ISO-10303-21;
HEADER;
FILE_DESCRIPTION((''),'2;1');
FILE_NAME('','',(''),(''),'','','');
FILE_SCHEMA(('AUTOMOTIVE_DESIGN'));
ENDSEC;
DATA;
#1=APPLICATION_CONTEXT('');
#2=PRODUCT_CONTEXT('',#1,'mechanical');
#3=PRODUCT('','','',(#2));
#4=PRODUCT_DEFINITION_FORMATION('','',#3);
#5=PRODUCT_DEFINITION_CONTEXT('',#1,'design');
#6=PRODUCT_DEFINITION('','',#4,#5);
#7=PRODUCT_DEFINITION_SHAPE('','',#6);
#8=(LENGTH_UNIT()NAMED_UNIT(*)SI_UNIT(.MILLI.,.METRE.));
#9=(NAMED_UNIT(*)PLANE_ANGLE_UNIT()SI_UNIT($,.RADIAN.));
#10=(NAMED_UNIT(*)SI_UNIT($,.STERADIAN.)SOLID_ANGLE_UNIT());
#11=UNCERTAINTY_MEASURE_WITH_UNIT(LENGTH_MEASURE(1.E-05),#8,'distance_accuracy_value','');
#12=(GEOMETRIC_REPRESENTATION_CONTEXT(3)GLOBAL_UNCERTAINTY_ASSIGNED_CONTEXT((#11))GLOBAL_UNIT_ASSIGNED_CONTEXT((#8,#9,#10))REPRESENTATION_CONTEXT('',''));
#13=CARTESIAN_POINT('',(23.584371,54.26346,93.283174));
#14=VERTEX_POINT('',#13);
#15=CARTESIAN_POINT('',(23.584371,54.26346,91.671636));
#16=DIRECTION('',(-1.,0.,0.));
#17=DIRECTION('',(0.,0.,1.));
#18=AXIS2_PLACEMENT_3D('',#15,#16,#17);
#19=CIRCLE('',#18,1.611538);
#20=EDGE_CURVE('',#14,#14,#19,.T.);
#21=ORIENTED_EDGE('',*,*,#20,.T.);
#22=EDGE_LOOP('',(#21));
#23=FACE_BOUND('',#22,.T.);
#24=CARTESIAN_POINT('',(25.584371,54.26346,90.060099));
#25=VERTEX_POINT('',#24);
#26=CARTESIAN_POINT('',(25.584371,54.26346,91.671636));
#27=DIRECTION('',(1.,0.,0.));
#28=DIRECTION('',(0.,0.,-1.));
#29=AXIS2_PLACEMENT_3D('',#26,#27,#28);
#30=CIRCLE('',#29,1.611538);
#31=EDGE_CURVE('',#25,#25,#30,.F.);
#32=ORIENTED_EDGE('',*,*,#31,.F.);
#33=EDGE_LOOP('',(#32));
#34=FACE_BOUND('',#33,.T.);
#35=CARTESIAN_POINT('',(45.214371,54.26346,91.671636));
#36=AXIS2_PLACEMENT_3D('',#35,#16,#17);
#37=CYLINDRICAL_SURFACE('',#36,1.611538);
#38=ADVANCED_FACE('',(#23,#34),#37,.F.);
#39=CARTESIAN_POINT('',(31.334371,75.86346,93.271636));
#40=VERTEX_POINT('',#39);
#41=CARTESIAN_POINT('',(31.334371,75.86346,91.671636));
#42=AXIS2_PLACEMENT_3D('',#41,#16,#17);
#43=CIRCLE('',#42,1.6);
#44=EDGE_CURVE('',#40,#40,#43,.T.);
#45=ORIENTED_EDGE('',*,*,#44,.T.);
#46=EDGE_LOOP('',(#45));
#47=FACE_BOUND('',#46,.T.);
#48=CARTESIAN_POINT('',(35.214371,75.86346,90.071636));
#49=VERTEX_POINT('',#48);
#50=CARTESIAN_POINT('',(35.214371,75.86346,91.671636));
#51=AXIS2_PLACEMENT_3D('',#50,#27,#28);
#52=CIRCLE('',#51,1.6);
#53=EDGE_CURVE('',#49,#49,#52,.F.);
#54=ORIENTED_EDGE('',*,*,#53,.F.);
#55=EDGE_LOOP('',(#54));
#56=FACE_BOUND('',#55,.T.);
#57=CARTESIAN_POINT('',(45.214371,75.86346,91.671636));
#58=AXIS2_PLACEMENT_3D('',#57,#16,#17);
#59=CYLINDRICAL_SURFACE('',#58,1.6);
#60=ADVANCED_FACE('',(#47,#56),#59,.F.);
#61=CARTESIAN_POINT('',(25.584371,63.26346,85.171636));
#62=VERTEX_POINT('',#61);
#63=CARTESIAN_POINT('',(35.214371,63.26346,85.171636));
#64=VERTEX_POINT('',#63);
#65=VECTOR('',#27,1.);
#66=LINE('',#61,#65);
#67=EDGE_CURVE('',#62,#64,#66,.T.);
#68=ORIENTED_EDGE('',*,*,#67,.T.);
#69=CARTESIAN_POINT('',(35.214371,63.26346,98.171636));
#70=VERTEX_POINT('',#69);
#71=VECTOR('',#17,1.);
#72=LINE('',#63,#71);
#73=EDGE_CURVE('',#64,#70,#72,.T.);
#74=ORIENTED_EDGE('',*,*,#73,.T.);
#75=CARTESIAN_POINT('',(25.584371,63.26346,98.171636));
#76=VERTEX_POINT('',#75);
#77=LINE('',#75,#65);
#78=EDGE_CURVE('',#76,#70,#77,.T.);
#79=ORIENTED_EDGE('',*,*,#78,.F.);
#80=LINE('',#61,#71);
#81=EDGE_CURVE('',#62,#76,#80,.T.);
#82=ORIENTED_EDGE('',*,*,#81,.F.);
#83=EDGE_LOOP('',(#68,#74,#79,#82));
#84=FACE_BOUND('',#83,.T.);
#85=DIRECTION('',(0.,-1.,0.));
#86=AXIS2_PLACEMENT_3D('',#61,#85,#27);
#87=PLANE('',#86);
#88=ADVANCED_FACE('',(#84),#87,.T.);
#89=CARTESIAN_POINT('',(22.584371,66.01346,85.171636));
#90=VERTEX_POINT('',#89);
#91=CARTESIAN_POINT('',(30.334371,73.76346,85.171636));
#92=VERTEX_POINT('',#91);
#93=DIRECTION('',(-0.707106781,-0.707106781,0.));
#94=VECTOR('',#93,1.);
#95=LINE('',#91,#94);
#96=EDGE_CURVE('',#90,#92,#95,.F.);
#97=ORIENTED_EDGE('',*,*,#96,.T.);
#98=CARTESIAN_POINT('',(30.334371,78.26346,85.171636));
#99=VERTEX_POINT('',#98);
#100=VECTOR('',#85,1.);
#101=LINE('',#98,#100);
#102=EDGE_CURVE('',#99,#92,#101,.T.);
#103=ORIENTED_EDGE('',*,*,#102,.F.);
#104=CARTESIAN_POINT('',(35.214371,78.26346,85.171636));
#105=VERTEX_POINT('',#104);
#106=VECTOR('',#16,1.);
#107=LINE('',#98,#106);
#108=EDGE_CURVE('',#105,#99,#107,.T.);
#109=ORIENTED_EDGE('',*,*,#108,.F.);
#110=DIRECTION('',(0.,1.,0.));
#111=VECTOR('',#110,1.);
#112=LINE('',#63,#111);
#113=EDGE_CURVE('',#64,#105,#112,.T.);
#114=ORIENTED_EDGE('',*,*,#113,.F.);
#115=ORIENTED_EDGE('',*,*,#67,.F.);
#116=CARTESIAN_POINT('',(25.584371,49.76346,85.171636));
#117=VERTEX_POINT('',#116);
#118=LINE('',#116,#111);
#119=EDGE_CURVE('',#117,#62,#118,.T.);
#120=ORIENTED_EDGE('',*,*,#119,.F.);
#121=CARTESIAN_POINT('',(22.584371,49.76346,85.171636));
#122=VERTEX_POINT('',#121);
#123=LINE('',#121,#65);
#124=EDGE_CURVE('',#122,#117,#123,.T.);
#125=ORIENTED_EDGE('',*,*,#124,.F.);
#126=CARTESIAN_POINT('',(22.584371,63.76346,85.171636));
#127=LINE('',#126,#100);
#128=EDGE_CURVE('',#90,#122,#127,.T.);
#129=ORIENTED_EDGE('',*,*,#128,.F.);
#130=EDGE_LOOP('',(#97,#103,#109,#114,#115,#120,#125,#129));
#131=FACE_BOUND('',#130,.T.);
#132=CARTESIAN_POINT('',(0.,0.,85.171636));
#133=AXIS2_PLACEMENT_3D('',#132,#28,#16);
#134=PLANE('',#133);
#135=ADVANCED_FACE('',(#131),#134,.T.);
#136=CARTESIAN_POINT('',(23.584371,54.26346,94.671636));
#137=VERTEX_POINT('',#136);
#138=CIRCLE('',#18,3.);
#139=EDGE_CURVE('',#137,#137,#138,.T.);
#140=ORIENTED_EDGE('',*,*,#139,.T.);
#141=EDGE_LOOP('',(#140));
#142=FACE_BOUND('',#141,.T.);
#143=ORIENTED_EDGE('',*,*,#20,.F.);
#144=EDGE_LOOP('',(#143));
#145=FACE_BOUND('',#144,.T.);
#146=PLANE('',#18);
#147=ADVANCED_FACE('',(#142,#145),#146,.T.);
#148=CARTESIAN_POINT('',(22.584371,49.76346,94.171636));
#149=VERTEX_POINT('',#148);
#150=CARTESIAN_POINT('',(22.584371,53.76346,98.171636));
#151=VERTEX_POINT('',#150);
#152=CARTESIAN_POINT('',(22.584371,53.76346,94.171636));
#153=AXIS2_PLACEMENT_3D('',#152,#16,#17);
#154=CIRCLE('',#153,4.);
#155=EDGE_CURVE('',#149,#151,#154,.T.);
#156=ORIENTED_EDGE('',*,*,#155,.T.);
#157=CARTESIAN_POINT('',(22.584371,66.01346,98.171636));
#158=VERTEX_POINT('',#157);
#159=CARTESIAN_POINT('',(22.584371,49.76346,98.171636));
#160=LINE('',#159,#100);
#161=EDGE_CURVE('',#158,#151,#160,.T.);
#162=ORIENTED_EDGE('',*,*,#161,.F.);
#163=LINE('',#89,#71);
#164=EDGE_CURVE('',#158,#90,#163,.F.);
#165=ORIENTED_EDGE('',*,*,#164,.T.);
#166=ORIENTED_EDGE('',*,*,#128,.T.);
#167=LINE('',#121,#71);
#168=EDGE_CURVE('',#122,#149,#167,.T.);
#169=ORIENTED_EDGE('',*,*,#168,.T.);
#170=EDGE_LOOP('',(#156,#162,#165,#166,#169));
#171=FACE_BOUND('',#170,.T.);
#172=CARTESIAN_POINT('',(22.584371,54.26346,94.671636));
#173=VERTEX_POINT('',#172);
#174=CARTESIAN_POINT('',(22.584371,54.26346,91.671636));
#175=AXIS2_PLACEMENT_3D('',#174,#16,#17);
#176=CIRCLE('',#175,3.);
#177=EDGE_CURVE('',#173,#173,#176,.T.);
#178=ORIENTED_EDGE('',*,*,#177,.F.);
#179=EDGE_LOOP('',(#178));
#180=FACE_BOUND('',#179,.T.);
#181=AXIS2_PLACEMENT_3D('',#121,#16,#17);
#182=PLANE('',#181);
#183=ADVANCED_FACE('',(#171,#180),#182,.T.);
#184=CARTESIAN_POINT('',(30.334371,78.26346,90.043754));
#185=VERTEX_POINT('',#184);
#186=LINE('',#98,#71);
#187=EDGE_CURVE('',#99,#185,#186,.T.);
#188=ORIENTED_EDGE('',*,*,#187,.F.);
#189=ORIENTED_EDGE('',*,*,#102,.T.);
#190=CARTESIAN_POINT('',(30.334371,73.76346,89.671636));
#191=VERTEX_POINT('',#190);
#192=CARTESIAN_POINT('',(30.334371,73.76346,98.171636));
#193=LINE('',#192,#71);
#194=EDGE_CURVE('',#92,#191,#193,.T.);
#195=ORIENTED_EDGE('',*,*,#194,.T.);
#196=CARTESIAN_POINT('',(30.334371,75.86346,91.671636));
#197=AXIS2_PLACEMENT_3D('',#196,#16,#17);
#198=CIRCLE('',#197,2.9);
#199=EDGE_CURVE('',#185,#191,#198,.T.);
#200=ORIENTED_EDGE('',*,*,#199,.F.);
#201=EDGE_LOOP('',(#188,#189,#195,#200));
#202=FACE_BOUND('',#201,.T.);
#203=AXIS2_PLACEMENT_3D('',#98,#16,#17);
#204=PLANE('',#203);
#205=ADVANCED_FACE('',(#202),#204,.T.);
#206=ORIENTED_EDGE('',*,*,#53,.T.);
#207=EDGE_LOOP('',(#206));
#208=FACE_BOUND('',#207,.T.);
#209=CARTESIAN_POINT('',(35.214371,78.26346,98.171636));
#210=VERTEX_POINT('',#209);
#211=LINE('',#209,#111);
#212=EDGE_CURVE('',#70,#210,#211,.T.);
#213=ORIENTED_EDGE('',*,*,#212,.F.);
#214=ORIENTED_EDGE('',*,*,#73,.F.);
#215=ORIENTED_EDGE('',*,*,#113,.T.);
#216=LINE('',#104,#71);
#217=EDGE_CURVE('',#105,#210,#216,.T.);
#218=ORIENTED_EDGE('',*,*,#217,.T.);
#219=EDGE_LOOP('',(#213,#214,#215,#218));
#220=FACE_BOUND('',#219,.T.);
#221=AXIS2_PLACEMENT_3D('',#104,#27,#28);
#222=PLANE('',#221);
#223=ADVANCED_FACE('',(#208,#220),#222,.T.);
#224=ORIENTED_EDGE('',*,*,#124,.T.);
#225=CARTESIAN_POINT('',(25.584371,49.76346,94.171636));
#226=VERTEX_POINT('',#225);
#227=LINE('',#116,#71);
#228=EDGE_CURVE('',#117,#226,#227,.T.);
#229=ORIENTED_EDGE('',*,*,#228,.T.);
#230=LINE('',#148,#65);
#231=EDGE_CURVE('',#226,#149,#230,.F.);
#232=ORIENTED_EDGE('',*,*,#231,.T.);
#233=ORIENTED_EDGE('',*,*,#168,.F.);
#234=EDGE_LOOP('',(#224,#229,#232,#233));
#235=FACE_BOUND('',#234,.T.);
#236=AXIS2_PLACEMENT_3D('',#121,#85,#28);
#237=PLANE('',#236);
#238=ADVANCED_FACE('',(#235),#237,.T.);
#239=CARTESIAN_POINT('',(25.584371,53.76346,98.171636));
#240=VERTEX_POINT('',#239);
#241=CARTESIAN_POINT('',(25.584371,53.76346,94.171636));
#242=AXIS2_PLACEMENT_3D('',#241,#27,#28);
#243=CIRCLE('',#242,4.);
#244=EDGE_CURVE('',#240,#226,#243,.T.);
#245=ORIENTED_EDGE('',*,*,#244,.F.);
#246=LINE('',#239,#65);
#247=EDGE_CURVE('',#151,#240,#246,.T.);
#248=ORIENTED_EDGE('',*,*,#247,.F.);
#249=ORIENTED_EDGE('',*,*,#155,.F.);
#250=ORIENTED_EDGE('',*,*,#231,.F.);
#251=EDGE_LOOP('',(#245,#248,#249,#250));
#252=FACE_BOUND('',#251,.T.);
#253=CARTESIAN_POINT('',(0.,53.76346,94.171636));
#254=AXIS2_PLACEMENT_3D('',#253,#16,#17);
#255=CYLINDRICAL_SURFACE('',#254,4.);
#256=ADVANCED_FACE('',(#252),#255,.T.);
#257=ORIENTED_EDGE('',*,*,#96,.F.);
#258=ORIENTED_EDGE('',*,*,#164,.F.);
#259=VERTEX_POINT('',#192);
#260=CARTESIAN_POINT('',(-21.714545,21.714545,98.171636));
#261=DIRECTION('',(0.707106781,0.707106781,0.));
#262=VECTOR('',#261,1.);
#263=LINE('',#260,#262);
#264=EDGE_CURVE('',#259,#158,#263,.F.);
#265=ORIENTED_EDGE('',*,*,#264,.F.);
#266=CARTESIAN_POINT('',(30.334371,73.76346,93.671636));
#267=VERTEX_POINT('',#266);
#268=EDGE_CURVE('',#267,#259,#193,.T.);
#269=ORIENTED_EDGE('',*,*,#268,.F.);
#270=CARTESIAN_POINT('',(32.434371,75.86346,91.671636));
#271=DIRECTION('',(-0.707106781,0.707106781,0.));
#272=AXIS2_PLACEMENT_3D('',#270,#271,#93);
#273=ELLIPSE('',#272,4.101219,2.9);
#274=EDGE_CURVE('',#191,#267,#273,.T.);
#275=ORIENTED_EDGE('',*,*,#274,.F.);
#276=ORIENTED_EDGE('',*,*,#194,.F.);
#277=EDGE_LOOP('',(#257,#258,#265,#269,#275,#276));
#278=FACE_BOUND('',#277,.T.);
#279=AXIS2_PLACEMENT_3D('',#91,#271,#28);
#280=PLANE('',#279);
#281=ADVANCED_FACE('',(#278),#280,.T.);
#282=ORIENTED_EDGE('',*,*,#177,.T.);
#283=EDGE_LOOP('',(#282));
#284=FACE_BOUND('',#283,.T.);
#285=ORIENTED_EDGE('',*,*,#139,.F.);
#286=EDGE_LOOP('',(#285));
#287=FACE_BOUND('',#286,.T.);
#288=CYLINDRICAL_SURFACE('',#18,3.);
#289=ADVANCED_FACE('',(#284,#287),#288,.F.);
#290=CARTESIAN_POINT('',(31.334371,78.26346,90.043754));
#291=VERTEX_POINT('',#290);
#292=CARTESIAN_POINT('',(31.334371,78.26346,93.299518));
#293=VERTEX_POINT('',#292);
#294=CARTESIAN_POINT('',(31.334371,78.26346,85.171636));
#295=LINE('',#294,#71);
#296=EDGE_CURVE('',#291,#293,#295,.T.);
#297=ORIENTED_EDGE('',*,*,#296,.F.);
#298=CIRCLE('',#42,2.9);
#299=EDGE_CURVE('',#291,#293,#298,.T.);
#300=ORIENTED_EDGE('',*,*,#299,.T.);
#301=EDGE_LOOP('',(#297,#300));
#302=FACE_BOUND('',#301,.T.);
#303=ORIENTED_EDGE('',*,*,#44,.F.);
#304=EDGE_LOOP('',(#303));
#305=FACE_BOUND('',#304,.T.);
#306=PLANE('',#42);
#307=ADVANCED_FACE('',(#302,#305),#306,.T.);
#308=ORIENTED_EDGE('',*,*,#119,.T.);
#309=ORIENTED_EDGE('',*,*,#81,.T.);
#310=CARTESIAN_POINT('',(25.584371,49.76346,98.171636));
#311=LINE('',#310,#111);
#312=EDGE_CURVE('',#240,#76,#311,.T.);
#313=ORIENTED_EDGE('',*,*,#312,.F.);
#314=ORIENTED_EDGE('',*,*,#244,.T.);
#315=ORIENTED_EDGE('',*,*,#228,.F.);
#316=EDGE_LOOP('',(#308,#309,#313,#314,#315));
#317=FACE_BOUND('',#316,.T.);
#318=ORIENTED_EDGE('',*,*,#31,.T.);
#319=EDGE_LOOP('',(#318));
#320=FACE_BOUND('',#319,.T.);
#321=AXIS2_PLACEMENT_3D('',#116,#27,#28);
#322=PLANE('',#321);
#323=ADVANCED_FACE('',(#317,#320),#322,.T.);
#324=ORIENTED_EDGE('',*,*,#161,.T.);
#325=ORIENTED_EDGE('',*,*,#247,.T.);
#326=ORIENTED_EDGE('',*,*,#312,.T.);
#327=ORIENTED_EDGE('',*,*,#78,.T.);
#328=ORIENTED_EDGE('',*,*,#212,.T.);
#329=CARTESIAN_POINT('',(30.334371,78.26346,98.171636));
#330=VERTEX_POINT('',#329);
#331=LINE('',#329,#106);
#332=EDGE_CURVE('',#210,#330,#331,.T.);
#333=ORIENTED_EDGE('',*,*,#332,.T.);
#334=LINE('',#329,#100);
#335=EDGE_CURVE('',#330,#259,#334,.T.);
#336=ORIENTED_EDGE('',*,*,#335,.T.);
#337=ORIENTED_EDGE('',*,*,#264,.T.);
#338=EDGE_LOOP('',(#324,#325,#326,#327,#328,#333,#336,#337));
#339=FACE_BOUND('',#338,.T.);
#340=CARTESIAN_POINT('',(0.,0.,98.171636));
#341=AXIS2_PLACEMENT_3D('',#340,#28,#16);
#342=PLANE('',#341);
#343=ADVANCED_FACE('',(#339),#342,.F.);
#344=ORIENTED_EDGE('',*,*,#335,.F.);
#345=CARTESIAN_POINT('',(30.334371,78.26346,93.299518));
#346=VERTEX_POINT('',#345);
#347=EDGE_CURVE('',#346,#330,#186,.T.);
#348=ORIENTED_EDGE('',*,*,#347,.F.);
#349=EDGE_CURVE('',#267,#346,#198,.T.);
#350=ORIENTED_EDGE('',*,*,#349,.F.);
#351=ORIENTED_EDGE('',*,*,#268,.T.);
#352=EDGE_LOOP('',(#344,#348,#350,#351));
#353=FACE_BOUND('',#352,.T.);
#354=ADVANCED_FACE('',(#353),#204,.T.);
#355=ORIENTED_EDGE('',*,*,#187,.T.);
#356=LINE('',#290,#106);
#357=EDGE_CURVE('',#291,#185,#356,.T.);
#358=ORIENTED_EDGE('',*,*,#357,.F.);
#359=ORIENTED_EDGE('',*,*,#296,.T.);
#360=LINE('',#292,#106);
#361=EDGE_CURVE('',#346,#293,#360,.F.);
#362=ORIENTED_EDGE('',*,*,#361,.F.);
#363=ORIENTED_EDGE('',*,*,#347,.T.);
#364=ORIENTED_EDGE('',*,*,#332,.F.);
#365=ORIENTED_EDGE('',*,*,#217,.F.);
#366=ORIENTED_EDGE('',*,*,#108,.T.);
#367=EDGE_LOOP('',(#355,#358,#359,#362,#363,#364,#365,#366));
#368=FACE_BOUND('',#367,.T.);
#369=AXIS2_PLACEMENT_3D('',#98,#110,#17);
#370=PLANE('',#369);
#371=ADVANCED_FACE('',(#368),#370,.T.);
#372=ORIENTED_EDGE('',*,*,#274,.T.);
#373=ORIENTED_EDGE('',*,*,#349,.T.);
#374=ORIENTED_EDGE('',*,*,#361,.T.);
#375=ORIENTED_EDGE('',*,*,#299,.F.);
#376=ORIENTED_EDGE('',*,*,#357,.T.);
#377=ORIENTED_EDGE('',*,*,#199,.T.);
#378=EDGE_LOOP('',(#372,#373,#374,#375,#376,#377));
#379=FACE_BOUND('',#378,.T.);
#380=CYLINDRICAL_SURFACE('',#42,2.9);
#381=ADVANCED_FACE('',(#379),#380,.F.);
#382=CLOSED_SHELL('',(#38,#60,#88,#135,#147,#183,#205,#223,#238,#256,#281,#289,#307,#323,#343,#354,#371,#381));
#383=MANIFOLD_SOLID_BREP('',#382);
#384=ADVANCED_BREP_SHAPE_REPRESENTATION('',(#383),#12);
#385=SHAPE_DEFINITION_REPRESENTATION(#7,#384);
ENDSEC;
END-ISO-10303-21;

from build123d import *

# Parameters (mm, degrees)
BOSS_EXTRUDE1_DEPTH     = 13
CUT_EXTRUDE1_DEPTH      = 10
CUT_EXTRUDE1_DEPTH_BACK = 30
SKETCH2_R               = 1.6
SKETCH2_R_2             = 1.611537585
SKETCH3_R               = 3
CUT_EXTRUDE2_DEPTH      = 1
SKETCH4_R               = 2.9
CUT_EXTRUDE3_DEPTH      = 1
CHAMFER1_SIZE           = 10
FILLET1_R               = 4


with BuildPart() as part:
    # Sketch1 → Boss-Extrude1 (new body)
    with BuildSketch(Plane.XY.offset(98.171636097)):
        Polygon((30.334370899, 78.263460463), (35.214370899, 78.263460463), (35.214370899, 65.863460463), (35.214370899, 63.263460463), (25.584370899, 63.263460463), (25.584370899, 49.763460463), (22.584370899, 49.763460463), (22.584370899, 63.263460463), (22.584370899, 63.763460463), (30.334370899, 63.763460463), align=None)
    extrude(amount=-BOSS_EXTRUDE1_DEPTH)

    # Sketch2 → Cut-Extrude1 (cut, two sides: drawn at the far end of the back side and taken through both)
    with BuildSketch(Plane(origin=(35.214370899, 0, 0), x_dir=(0, 0, -1), z_dir=(1, 0, 0)).offset(-CUT_EXTRUDE1_DEPTH_BACK)):
        with Locations(Location((-91.671636097, 75.863460463, 0), (0, 0, 180))):
            Circle(SKETCH2_R)
        with Locations(Location((-91.671636097, 54.263460463, 0), (0, 0, 180))):
            Circle(SKETCH2_R_2)
    extrude(amount=CUT_EXTRUDE1_DEPTH + CUT_EXTRUDE1_DEPTH_BACK, mode=Mode.SUBTRACT)

    # Sketch3 → Cut-Extrude2 (cut)
    with BuildSketch(Plane.ZY.offset(-22.584370899)):
        with Locations((91.671636097, 54.263460463)):
            Circle(SKETCH3_R)
    extrude(amount=-CUT_EXTRUDE2_DEPTH, mode=Mode.SUBTRACT)

    # Sketch4 → Cut-Extrude3 (cut)
    with BuildSketch(Plane.ZY.offset(-30.334370899)):
        with Locations((91.671636097, 75.863460463)):
            Circle(SKETCH4_R)
    extrude(amount=-CUT_EXTRUDE3_DEPTH, mode=Mode.SUBTRACT)

    # Chamfer1
    # the kernel refuses this chamfer: 10 mm, written as the material it adds along each edge
    with BuildSketch(Plane(origin=(30.334370899, 63.763460463, 98.171636097), x_dir=(0.027495876610586337, 0.9996219169112968, 0), z_dir=(0, 0, -1))) as chamfer1_piece_1_section:
        Polygon((CHAMFER1_SIZE * 0.999621916911, -CHAMFER1_SIZE * 0.0274958766106), (-CHAMFER1_SIZE * 0.0274958766106, -CHAMFER1_SIZE * 0.999621916911), (0, 0), align=None)
    chamfer1_piece_1 = extrude(amount=13, mode=Mode.PRIVATE)
    chamfer1_piece_1 = chamfer1_piece_1 - Plane(origin=(27.388550815, 75.863460463, 91.671636097), x_dir=(0, 0, 1), z_dir=(-1, 0, 0)) * Cylinder(2.9, 66, mode=Mode.PRIVATE)
    chamfer1_piece_1 = split(chamfer1_piece_1, bisect_by=Plane(origin=(22.584370899, 67.23157259, 91.671636099), z_dir=(1, 0, 0)), keep=Keep.TOP, mode=Mode.PRIVATE)
    add(chamfer1_piece_1)

    # Fillet1
    fillet1_edges = [part.edges().sort_by_distance(p)[0] for p in [
        (24.084370899, 49.763460463, 98.171636097),
    ]]
    fillet(fillet1_edges, radius=FILLET1_R)


solid = part.part
